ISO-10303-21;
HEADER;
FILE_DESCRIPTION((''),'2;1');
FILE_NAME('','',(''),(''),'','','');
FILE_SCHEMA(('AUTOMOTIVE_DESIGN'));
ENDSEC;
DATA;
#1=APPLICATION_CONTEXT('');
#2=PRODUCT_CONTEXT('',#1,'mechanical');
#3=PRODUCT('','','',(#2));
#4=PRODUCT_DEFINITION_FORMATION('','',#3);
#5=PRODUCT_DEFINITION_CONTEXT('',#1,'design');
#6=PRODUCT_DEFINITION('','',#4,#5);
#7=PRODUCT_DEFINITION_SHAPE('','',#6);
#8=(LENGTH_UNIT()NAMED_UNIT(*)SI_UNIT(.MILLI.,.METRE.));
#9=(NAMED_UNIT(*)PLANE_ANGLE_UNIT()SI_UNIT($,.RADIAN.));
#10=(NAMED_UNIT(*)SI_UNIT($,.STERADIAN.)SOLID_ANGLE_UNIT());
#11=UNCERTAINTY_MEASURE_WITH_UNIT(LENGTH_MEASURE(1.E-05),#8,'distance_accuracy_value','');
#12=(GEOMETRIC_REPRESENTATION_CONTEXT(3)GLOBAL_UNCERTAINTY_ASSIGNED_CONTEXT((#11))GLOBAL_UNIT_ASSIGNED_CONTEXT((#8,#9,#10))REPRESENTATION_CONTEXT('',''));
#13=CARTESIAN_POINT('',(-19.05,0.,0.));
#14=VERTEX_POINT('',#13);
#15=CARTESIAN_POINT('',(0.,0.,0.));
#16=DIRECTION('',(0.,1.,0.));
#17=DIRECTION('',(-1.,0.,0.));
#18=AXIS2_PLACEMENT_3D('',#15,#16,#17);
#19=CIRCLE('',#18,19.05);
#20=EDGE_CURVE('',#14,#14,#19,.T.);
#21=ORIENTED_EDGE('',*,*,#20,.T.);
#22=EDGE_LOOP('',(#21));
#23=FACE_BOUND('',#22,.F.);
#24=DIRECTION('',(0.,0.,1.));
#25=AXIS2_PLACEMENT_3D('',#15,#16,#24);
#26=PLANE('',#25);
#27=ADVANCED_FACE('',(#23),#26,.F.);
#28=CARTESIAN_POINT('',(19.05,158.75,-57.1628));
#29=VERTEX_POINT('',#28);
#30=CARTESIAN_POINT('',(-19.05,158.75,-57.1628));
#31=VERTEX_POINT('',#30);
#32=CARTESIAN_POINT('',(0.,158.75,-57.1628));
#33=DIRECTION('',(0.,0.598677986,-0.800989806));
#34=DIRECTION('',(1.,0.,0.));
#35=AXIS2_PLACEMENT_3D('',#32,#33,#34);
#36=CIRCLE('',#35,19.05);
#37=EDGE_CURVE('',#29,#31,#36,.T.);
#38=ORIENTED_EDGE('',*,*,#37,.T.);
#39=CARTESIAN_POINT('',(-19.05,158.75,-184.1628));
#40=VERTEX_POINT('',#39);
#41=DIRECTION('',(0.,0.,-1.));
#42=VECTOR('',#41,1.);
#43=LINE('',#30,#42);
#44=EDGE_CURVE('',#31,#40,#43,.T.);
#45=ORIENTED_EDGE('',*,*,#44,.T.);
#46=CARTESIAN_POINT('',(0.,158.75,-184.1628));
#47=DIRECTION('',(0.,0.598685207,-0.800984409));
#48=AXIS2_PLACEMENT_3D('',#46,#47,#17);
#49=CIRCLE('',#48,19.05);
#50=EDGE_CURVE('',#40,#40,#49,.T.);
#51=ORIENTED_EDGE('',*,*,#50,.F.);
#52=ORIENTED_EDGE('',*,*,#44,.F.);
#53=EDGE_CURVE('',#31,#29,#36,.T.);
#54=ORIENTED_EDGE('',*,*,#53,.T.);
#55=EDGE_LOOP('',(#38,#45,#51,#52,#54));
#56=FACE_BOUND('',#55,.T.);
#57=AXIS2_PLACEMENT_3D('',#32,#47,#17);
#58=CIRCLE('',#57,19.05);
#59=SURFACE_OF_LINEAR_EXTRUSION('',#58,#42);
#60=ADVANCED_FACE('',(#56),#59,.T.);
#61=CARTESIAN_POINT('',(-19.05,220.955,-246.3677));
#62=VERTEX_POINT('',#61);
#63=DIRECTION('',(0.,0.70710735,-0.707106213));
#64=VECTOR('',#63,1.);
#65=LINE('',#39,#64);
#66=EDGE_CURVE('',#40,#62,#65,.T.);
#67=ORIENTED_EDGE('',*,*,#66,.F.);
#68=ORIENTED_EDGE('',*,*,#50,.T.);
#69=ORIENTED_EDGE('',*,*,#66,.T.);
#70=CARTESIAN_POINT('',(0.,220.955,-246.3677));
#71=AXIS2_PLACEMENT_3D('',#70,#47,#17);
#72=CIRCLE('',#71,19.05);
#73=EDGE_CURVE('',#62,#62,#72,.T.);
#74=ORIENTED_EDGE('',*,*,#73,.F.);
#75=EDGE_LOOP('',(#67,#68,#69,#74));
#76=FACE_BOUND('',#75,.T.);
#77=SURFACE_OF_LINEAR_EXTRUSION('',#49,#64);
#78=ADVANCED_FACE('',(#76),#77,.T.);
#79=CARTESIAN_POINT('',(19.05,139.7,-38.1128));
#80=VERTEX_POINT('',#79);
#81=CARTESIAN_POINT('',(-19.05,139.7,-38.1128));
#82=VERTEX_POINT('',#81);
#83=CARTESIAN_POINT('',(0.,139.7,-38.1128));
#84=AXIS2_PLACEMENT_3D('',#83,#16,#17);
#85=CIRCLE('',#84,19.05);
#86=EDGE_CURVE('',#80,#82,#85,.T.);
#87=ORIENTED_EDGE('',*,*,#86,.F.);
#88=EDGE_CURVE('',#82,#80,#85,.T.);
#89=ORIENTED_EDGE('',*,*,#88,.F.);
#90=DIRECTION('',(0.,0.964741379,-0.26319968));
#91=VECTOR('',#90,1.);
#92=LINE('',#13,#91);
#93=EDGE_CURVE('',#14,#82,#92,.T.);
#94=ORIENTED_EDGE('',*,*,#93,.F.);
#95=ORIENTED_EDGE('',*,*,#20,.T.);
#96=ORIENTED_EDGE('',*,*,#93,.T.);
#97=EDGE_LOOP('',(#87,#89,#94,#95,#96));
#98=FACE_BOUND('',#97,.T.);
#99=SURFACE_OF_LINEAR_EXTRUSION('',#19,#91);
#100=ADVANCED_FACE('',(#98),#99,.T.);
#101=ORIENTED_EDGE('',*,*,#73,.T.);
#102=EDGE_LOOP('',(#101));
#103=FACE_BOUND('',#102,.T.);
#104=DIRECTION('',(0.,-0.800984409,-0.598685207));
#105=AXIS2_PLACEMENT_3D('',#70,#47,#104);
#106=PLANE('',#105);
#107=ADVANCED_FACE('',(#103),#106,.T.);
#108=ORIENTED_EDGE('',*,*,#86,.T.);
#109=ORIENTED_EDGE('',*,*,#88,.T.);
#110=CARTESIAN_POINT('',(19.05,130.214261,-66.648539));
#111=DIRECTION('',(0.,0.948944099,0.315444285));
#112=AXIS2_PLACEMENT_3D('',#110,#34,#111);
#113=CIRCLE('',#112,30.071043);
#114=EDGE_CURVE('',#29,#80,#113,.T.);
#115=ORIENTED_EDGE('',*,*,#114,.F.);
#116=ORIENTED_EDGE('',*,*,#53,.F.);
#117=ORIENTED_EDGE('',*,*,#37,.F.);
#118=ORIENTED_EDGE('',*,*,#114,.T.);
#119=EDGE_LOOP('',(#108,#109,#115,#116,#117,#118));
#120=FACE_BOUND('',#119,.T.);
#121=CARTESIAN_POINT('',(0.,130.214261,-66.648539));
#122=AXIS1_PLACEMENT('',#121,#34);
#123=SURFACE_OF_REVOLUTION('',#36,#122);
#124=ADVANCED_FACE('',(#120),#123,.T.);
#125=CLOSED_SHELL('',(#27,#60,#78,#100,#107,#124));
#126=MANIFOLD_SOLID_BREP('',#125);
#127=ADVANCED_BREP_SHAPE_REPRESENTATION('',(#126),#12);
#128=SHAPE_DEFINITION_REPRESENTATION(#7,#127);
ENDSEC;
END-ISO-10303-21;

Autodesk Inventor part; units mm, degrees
ref_plane "YZ Plane" through (0, 0, 0) normal (1, 0, 0) x (0, 1, 0)
ref_plane "XZ Plane" through (0, 0, 0) normal (0, 1, 0) x (-1, 0, 0)
ref_plane "XY Plane" through (0, 0, 0) normal (0, 0, 1) x (1, 0, 0)
sketch "Sketch1" plane through (0, 0, 0) normal (0, 1, 0) x (-1, 0, 0)
  circle A0 centre (0, 0) radius 19.05
  dimension "d0" = 38.1
sketch "Sketch2" plane through (0, 0, 0) normal (1, 0, 0) x (0, 1, 0)
  line L0 (0, 0) -> (139.7, -38.1128)
  line L1 (0, 0) -> (144.8056, 0) construction
  dimension "d4" = 15.26
sweep "Sweep1" add profiles "Sketch1" path "Sketch2"
sketch "Sketch3" plane through (0, 139.7, -38.1128) normal (0, 1, 0) x (1, 0, 0)
  circle A0 centre (0, 0) radius 19.05
  point P0 (0, -38.1128)
sketch "Sketch4" plane through (0, 0, 0) normal (1, 0, 0) x (0, 1, 0)
  line L0 (139.7, -57.1628) -> (139.7, -19.0628) projected
  arc A0 (158.75, -57.1628) -> (139.7, -38.1128) centre (130.214, -66.6487) ccw
  line L1 (158.75, -184.1628) -> (260.35, -184.1628) construction
  point P0 (0, 0)
sweep "Sweep2" add profiles "Sketch3" path "Sketch4" path curves A0
sketch "Sketch5" plane through (0, 158.75, -57.1628) normal (0, 0.5986852, -0.8009844) x (-1, 0, 0)
  circle A0 centre (0, 0) radius 19.05
  point P0 (0, -92.9338)
sketch "Sketch6" plane through (0, 0, 0) normal (1, 0, 0) x (0, 1, 0)
  line L0 (158.75, -57.1628) -> (158.75, -184.1628)
  point P0 (0, 0)
  dimension "d16" = 127
sweep "Sweep3" add profiles "Sketch5" path "Sketch6"
sketch "Sketch7" plane through (0, 158.75, -184.1628) normal (0, 0.5986852, -0.8009844) x (-1, 0, 0)
  circle A0 centre (0, 0) radius 19.05
  point P0 (0, -16.9007)
sketch "Sketch8" plane through (0, 0, 0) normal (1, 0, 0) x (0, 1, 0)
  line L0 (143.4912, -195.5677) -> (174.0088, -172.7578) projected
  line L1 (158.75, -184.1628) -> (220.955, -246.3677)
  line L2 (158.75, -184.1628) -> (246.7211, -184.1628) construction
  point P0 (0, 0)
  dimension "d20" = 45
sweep "Sweep4" add profiles "Sketch7" path "Sketch8" path curves L1
sketch "Sketch13" plane through (0, 0, 0) normal (1, 0, 0) x (0, 1, 0)
  line L0 (205.6962, -257.7727) -> (236.2137, -234.9628) projected
  point P0 (0, 0)
properties part number "rocker (1.1)"
